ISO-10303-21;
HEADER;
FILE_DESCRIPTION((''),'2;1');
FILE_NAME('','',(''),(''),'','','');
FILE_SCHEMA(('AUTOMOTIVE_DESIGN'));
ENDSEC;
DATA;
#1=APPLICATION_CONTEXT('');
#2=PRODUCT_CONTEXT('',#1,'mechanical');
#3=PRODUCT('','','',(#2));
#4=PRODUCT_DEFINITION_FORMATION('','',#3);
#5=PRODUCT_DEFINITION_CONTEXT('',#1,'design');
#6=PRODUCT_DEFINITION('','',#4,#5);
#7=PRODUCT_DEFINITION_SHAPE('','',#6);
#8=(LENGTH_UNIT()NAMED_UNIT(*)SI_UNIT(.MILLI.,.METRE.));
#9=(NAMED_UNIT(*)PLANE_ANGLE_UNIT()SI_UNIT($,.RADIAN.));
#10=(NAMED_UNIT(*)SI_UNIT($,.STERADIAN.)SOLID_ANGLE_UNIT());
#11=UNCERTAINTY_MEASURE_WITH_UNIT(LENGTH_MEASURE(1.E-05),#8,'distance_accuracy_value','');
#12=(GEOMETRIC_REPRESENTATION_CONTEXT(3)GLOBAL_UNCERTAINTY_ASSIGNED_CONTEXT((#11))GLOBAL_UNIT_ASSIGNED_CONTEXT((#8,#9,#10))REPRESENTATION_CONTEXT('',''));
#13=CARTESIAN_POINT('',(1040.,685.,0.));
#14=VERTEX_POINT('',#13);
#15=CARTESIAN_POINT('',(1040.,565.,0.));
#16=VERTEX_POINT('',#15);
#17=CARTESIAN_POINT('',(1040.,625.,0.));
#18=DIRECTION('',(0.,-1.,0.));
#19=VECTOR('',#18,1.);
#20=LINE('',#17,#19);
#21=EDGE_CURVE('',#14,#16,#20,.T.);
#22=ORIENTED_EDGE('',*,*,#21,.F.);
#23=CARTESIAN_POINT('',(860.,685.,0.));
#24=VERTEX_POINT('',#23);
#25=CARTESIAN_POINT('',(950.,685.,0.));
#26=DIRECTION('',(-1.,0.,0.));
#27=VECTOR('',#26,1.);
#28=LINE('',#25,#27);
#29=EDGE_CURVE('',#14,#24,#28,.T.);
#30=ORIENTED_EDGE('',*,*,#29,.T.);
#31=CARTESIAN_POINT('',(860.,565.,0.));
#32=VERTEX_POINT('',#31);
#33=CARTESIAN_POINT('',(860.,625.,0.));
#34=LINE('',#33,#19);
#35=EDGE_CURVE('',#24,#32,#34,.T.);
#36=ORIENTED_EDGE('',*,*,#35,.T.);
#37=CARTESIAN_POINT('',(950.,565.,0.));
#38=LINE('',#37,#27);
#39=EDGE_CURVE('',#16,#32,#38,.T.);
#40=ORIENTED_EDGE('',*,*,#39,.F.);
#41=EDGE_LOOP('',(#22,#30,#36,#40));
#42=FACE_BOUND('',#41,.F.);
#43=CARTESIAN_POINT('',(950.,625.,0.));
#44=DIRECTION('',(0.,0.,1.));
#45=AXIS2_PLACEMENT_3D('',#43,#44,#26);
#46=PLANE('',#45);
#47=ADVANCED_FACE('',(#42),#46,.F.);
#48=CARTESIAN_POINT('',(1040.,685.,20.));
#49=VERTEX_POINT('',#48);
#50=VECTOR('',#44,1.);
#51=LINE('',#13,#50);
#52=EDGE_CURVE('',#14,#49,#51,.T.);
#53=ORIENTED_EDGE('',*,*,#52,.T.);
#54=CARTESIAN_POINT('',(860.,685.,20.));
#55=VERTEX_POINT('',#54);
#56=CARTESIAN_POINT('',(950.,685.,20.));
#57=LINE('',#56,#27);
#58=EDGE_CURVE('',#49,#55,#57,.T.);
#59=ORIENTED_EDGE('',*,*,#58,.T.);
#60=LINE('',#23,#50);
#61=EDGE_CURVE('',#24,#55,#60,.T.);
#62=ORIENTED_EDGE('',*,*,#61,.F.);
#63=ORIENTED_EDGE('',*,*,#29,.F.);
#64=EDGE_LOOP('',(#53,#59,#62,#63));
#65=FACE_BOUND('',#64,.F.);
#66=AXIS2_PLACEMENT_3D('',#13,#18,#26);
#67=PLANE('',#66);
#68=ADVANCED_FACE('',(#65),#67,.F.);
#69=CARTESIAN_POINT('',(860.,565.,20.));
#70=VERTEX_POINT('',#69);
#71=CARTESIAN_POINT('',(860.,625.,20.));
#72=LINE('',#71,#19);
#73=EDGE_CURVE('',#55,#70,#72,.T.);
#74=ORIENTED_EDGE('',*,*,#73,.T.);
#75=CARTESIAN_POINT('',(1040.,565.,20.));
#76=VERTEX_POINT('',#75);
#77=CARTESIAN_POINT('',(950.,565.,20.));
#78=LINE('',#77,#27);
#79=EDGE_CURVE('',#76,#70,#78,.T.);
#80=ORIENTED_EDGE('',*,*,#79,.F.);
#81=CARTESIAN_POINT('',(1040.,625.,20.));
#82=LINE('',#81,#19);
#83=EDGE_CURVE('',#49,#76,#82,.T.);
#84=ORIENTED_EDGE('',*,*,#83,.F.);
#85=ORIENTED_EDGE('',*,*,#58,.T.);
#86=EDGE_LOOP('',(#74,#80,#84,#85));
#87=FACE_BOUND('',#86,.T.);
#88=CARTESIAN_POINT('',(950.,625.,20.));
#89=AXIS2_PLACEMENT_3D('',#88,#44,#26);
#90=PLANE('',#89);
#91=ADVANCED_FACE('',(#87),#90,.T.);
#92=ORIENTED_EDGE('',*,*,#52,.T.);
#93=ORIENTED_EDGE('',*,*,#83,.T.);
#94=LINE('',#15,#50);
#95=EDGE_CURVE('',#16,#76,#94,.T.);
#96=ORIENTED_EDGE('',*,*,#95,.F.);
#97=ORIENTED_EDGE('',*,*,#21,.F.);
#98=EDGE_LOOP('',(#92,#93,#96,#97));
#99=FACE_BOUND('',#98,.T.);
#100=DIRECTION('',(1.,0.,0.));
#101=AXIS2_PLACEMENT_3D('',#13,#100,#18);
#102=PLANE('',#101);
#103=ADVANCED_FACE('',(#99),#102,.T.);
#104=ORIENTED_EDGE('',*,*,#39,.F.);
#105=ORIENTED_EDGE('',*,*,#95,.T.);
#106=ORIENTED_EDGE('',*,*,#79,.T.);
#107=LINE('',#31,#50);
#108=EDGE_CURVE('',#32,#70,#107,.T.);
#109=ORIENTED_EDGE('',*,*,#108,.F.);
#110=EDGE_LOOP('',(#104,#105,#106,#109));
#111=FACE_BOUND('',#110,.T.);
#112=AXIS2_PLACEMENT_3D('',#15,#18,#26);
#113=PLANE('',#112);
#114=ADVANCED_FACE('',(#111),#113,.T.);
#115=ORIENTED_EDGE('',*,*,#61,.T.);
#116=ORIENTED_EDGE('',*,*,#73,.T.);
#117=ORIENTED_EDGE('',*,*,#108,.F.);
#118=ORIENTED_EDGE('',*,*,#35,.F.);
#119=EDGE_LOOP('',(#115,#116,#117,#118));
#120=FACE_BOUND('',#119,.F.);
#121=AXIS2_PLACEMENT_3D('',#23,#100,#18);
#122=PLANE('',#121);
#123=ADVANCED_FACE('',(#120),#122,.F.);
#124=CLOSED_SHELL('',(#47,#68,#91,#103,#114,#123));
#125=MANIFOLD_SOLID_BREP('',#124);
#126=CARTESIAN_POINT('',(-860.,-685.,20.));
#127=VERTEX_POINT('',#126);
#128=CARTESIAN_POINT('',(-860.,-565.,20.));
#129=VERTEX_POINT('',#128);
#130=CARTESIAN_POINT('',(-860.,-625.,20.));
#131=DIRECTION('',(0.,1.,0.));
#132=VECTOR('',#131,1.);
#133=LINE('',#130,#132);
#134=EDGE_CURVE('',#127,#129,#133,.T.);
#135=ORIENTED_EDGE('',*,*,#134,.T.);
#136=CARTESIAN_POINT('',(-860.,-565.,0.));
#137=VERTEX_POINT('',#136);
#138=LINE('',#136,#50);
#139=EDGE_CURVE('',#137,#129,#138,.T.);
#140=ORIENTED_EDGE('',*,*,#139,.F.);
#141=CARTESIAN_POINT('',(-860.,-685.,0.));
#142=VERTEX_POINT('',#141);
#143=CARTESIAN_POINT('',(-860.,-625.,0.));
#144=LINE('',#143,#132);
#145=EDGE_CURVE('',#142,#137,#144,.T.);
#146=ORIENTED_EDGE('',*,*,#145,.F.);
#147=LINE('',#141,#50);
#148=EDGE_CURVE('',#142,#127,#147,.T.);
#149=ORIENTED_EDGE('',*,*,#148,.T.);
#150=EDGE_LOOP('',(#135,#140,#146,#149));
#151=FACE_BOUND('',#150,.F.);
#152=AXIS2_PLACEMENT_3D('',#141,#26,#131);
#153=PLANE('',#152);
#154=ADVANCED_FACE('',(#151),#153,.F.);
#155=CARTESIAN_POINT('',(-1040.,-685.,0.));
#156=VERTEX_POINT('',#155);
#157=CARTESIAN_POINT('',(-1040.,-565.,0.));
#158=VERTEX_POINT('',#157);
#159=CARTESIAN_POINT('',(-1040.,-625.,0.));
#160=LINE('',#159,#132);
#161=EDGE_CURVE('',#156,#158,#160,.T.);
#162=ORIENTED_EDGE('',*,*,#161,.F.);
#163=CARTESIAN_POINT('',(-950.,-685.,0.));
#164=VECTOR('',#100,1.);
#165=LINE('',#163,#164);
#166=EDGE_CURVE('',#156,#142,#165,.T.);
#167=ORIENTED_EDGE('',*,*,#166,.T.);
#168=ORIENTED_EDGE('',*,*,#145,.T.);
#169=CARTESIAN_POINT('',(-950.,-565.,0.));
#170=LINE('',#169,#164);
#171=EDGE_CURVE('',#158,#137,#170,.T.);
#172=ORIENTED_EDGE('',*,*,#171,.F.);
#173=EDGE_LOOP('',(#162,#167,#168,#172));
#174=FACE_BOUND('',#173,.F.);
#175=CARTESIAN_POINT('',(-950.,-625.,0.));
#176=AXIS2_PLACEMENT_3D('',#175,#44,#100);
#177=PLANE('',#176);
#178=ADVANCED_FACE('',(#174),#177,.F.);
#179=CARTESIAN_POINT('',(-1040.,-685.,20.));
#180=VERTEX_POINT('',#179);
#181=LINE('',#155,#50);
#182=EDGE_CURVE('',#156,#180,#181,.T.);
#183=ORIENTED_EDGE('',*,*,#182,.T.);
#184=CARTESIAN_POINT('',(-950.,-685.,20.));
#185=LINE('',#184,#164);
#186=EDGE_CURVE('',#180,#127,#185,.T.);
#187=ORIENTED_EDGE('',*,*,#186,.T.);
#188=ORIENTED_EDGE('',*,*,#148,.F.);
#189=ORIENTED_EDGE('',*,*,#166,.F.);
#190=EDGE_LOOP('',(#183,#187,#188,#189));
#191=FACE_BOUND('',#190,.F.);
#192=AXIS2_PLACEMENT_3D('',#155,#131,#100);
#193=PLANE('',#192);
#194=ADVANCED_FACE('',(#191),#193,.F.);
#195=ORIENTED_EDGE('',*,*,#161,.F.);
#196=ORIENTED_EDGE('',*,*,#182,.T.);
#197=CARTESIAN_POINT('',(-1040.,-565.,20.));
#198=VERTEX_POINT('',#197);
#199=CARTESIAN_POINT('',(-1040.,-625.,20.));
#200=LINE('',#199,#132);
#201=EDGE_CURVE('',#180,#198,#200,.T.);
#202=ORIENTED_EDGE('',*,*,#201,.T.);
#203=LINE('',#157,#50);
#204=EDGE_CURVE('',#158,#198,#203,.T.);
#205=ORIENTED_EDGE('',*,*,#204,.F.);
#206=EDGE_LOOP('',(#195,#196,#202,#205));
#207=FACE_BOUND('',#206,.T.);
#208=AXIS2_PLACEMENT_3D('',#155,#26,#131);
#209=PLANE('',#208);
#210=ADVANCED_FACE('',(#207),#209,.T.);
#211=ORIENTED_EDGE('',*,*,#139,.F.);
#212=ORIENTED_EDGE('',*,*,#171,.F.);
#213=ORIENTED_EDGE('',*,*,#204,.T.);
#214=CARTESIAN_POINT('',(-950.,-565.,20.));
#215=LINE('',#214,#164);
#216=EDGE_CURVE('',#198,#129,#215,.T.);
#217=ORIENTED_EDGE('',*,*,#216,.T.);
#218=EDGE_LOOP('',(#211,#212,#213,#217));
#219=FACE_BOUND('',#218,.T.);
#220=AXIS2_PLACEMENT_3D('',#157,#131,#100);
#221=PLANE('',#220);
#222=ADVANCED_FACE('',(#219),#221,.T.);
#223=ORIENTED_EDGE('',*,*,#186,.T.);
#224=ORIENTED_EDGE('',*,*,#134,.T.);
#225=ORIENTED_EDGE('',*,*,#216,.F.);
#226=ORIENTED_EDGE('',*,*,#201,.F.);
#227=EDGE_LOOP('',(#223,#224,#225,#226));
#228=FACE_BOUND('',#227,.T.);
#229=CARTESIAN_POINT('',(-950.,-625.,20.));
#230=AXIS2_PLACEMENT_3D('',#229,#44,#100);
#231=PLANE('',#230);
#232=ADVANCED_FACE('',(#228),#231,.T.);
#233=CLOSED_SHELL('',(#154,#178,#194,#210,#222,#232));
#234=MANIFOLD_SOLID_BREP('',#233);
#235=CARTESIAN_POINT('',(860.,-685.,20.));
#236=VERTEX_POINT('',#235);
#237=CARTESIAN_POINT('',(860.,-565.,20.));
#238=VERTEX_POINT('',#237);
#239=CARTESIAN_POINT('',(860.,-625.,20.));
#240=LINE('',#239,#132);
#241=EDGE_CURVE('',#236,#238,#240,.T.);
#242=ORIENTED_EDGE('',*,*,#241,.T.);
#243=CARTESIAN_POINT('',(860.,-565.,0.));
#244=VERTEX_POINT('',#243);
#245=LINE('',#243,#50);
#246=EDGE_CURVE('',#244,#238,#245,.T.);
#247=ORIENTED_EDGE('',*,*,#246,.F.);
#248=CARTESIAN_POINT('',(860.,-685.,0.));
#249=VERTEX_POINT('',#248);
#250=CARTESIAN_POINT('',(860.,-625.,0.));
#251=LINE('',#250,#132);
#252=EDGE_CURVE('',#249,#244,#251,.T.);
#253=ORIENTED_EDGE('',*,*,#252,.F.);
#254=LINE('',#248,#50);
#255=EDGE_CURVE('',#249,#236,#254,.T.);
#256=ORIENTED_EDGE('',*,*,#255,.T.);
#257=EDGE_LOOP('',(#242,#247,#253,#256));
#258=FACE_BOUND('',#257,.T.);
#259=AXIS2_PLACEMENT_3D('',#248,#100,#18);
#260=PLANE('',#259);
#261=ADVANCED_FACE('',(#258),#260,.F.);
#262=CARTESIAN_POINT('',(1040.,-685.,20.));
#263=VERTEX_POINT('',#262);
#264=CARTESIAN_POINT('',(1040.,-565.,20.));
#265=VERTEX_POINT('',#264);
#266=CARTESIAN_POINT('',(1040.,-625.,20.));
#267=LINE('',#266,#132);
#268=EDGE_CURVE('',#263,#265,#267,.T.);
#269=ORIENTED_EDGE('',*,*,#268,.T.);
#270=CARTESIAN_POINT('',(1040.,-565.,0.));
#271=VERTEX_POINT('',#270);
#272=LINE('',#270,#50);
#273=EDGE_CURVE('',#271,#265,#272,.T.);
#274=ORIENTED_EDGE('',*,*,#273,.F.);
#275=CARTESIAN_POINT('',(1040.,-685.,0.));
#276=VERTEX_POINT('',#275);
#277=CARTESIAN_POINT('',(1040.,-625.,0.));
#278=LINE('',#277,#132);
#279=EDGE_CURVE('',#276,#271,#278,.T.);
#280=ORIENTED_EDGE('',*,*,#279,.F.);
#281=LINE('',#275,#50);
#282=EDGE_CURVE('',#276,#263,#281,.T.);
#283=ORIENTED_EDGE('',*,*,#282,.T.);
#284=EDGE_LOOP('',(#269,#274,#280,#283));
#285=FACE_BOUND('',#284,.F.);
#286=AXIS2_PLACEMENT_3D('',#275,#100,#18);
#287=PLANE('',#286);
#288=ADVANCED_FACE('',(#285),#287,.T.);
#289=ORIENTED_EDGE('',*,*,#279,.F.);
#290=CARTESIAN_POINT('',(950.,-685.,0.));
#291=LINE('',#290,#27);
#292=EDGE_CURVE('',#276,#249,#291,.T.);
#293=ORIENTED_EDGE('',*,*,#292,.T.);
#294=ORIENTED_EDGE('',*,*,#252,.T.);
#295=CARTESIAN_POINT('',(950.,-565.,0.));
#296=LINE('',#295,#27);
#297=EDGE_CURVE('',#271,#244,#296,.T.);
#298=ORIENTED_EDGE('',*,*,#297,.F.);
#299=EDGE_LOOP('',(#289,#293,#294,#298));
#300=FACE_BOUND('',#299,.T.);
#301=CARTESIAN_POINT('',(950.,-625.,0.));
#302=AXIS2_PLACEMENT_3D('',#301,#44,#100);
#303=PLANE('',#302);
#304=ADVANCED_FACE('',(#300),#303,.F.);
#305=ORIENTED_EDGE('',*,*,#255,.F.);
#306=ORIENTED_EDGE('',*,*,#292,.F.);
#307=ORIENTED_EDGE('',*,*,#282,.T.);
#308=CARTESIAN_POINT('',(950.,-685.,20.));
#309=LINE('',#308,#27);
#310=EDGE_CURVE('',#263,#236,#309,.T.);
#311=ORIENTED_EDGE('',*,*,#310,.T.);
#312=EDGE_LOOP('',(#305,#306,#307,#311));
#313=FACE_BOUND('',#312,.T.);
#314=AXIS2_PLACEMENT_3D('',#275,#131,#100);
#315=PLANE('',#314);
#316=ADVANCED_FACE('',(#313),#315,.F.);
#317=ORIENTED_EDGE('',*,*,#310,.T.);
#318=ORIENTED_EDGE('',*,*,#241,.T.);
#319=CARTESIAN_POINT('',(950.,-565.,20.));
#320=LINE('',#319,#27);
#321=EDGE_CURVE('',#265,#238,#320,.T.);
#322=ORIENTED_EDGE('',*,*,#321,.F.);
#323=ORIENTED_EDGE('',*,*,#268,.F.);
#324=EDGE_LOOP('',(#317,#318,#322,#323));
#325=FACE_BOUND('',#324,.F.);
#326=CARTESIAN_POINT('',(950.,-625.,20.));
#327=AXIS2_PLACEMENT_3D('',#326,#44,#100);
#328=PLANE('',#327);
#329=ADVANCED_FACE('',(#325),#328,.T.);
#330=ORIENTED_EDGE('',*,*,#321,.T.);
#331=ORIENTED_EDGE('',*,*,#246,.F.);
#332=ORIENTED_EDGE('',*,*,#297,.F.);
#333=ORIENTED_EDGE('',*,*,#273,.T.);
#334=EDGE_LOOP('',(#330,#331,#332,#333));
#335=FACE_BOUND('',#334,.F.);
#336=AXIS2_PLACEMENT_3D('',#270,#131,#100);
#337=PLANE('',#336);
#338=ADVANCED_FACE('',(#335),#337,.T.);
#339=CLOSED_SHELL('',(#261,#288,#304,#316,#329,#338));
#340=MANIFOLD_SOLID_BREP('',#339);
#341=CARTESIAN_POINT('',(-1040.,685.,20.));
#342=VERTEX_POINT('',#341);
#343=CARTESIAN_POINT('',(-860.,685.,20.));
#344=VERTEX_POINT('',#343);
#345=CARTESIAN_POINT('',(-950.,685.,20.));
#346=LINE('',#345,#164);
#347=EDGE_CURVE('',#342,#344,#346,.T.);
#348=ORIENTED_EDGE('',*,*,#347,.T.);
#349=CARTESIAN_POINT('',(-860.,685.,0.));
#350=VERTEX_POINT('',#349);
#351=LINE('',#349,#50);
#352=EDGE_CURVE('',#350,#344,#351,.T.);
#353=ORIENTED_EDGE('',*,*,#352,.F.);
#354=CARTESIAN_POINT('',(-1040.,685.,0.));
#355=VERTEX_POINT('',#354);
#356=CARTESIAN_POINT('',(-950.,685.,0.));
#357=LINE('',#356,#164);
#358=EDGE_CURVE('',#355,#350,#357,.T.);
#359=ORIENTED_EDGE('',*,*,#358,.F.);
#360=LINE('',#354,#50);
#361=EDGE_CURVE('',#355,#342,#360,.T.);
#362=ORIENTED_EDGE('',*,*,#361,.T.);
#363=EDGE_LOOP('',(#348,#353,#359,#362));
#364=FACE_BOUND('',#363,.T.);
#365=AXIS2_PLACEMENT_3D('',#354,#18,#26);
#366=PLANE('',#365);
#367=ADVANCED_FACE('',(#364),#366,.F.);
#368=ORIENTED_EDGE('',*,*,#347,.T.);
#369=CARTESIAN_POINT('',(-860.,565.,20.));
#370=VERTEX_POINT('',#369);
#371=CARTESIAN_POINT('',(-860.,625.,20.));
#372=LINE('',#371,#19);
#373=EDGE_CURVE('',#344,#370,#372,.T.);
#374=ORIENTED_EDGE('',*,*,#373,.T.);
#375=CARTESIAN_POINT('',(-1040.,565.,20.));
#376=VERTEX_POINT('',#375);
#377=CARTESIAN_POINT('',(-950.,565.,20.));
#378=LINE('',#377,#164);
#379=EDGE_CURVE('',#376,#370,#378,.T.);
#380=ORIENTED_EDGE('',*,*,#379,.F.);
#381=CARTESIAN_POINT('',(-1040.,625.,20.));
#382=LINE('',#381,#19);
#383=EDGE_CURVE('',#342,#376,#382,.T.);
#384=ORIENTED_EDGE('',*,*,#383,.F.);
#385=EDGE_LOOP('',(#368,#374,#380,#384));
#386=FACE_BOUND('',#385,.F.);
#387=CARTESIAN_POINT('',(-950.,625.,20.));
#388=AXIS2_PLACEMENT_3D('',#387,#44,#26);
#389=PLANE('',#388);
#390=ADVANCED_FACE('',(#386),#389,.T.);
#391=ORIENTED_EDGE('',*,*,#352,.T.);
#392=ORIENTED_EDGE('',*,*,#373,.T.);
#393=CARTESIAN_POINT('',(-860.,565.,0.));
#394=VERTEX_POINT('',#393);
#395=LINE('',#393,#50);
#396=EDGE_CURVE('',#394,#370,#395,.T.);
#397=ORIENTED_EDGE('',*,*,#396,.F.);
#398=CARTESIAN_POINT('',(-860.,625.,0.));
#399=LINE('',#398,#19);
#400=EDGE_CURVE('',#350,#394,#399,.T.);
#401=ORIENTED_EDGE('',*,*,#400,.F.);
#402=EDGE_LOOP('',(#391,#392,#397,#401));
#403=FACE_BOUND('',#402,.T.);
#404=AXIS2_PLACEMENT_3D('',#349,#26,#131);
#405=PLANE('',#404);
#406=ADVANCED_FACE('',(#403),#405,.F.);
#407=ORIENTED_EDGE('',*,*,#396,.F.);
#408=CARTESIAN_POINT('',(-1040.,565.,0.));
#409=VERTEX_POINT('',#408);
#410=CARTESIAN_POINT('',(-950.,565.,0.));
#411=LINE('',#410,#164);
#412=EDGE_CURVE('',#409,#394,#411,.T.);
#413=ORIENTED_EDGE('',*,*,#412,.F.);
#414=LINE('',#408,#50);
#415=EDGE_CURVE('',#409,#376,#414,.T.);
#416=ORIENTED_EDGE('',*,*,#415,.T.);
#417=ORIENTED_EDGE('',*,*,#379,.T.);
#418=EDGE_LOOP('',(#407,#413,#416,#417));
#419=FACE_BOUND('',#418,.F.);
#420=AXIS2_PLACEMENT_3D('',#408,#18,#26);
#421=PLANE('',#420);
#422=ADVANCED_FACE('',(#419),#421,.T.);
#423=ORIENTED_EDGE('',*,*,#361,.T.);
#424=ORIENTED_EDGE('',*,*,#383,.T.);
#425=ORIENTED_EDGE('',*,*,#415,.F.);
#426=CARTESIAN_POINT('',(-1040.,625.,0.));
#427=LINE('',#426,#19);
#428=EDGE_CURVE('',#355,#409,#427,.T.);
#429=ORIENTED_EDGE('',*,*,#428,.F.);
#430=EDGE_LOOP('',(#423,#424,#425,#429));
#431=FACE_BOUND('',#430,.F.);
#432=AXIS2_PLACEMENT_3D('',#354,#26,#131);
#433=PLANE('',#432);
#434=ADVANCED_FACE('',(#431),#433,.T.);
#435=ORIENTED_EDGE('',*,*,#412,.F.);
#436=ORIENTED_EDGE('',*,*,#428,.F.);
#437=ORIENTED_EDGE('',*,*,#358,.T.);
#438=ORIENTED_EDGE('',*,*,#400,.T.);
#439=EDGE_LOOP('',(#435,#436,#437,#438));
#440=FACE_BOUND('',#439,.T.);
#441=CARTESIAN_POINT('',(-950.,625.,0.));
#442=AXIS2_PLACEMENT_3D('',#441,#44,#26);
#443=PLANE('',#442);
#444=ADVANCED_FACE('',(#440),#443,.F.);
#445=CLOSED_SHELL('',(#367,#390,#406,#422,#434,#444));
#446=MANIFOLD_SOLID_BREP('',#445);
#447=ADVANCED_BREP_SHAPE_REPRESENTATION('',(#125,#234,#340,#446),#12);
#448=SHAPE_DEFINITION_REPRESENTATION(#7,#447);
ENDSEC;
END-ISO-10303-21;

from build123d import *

# Parameters (mm, degrees)
F4_W     = 180
F4_H     = 120
F5_DEPTH = 20


# Not quite as in the source:
# - a feature names something its author has since deleted; it is built from what else it names


with BuildPart() as f5:
    # F4 (on Top) → F5 (new body)
    with BuildSketch(Plane.XY):
        with Locations((-950, -625)):
            Rectangle(F4_W, F4_H)
    extrude(amount=F5_DEPTH)


with BuildPart() as f6_1:
    # F6: instance of F5
    add(f5.part.mirror(Plane.YZ))


with BuildPart() as f7_1:
    # F7: instance of F5
    add(f5.part.mirror(Plane.XZ))


with BuildPart() as f7_2:
    # F7: instance of F6_1
    add(f6_1.part.mirror(Plane.XZ))


solid = Compound([f5.part, f6_1.part, f7_1.part, f7_2.part])
